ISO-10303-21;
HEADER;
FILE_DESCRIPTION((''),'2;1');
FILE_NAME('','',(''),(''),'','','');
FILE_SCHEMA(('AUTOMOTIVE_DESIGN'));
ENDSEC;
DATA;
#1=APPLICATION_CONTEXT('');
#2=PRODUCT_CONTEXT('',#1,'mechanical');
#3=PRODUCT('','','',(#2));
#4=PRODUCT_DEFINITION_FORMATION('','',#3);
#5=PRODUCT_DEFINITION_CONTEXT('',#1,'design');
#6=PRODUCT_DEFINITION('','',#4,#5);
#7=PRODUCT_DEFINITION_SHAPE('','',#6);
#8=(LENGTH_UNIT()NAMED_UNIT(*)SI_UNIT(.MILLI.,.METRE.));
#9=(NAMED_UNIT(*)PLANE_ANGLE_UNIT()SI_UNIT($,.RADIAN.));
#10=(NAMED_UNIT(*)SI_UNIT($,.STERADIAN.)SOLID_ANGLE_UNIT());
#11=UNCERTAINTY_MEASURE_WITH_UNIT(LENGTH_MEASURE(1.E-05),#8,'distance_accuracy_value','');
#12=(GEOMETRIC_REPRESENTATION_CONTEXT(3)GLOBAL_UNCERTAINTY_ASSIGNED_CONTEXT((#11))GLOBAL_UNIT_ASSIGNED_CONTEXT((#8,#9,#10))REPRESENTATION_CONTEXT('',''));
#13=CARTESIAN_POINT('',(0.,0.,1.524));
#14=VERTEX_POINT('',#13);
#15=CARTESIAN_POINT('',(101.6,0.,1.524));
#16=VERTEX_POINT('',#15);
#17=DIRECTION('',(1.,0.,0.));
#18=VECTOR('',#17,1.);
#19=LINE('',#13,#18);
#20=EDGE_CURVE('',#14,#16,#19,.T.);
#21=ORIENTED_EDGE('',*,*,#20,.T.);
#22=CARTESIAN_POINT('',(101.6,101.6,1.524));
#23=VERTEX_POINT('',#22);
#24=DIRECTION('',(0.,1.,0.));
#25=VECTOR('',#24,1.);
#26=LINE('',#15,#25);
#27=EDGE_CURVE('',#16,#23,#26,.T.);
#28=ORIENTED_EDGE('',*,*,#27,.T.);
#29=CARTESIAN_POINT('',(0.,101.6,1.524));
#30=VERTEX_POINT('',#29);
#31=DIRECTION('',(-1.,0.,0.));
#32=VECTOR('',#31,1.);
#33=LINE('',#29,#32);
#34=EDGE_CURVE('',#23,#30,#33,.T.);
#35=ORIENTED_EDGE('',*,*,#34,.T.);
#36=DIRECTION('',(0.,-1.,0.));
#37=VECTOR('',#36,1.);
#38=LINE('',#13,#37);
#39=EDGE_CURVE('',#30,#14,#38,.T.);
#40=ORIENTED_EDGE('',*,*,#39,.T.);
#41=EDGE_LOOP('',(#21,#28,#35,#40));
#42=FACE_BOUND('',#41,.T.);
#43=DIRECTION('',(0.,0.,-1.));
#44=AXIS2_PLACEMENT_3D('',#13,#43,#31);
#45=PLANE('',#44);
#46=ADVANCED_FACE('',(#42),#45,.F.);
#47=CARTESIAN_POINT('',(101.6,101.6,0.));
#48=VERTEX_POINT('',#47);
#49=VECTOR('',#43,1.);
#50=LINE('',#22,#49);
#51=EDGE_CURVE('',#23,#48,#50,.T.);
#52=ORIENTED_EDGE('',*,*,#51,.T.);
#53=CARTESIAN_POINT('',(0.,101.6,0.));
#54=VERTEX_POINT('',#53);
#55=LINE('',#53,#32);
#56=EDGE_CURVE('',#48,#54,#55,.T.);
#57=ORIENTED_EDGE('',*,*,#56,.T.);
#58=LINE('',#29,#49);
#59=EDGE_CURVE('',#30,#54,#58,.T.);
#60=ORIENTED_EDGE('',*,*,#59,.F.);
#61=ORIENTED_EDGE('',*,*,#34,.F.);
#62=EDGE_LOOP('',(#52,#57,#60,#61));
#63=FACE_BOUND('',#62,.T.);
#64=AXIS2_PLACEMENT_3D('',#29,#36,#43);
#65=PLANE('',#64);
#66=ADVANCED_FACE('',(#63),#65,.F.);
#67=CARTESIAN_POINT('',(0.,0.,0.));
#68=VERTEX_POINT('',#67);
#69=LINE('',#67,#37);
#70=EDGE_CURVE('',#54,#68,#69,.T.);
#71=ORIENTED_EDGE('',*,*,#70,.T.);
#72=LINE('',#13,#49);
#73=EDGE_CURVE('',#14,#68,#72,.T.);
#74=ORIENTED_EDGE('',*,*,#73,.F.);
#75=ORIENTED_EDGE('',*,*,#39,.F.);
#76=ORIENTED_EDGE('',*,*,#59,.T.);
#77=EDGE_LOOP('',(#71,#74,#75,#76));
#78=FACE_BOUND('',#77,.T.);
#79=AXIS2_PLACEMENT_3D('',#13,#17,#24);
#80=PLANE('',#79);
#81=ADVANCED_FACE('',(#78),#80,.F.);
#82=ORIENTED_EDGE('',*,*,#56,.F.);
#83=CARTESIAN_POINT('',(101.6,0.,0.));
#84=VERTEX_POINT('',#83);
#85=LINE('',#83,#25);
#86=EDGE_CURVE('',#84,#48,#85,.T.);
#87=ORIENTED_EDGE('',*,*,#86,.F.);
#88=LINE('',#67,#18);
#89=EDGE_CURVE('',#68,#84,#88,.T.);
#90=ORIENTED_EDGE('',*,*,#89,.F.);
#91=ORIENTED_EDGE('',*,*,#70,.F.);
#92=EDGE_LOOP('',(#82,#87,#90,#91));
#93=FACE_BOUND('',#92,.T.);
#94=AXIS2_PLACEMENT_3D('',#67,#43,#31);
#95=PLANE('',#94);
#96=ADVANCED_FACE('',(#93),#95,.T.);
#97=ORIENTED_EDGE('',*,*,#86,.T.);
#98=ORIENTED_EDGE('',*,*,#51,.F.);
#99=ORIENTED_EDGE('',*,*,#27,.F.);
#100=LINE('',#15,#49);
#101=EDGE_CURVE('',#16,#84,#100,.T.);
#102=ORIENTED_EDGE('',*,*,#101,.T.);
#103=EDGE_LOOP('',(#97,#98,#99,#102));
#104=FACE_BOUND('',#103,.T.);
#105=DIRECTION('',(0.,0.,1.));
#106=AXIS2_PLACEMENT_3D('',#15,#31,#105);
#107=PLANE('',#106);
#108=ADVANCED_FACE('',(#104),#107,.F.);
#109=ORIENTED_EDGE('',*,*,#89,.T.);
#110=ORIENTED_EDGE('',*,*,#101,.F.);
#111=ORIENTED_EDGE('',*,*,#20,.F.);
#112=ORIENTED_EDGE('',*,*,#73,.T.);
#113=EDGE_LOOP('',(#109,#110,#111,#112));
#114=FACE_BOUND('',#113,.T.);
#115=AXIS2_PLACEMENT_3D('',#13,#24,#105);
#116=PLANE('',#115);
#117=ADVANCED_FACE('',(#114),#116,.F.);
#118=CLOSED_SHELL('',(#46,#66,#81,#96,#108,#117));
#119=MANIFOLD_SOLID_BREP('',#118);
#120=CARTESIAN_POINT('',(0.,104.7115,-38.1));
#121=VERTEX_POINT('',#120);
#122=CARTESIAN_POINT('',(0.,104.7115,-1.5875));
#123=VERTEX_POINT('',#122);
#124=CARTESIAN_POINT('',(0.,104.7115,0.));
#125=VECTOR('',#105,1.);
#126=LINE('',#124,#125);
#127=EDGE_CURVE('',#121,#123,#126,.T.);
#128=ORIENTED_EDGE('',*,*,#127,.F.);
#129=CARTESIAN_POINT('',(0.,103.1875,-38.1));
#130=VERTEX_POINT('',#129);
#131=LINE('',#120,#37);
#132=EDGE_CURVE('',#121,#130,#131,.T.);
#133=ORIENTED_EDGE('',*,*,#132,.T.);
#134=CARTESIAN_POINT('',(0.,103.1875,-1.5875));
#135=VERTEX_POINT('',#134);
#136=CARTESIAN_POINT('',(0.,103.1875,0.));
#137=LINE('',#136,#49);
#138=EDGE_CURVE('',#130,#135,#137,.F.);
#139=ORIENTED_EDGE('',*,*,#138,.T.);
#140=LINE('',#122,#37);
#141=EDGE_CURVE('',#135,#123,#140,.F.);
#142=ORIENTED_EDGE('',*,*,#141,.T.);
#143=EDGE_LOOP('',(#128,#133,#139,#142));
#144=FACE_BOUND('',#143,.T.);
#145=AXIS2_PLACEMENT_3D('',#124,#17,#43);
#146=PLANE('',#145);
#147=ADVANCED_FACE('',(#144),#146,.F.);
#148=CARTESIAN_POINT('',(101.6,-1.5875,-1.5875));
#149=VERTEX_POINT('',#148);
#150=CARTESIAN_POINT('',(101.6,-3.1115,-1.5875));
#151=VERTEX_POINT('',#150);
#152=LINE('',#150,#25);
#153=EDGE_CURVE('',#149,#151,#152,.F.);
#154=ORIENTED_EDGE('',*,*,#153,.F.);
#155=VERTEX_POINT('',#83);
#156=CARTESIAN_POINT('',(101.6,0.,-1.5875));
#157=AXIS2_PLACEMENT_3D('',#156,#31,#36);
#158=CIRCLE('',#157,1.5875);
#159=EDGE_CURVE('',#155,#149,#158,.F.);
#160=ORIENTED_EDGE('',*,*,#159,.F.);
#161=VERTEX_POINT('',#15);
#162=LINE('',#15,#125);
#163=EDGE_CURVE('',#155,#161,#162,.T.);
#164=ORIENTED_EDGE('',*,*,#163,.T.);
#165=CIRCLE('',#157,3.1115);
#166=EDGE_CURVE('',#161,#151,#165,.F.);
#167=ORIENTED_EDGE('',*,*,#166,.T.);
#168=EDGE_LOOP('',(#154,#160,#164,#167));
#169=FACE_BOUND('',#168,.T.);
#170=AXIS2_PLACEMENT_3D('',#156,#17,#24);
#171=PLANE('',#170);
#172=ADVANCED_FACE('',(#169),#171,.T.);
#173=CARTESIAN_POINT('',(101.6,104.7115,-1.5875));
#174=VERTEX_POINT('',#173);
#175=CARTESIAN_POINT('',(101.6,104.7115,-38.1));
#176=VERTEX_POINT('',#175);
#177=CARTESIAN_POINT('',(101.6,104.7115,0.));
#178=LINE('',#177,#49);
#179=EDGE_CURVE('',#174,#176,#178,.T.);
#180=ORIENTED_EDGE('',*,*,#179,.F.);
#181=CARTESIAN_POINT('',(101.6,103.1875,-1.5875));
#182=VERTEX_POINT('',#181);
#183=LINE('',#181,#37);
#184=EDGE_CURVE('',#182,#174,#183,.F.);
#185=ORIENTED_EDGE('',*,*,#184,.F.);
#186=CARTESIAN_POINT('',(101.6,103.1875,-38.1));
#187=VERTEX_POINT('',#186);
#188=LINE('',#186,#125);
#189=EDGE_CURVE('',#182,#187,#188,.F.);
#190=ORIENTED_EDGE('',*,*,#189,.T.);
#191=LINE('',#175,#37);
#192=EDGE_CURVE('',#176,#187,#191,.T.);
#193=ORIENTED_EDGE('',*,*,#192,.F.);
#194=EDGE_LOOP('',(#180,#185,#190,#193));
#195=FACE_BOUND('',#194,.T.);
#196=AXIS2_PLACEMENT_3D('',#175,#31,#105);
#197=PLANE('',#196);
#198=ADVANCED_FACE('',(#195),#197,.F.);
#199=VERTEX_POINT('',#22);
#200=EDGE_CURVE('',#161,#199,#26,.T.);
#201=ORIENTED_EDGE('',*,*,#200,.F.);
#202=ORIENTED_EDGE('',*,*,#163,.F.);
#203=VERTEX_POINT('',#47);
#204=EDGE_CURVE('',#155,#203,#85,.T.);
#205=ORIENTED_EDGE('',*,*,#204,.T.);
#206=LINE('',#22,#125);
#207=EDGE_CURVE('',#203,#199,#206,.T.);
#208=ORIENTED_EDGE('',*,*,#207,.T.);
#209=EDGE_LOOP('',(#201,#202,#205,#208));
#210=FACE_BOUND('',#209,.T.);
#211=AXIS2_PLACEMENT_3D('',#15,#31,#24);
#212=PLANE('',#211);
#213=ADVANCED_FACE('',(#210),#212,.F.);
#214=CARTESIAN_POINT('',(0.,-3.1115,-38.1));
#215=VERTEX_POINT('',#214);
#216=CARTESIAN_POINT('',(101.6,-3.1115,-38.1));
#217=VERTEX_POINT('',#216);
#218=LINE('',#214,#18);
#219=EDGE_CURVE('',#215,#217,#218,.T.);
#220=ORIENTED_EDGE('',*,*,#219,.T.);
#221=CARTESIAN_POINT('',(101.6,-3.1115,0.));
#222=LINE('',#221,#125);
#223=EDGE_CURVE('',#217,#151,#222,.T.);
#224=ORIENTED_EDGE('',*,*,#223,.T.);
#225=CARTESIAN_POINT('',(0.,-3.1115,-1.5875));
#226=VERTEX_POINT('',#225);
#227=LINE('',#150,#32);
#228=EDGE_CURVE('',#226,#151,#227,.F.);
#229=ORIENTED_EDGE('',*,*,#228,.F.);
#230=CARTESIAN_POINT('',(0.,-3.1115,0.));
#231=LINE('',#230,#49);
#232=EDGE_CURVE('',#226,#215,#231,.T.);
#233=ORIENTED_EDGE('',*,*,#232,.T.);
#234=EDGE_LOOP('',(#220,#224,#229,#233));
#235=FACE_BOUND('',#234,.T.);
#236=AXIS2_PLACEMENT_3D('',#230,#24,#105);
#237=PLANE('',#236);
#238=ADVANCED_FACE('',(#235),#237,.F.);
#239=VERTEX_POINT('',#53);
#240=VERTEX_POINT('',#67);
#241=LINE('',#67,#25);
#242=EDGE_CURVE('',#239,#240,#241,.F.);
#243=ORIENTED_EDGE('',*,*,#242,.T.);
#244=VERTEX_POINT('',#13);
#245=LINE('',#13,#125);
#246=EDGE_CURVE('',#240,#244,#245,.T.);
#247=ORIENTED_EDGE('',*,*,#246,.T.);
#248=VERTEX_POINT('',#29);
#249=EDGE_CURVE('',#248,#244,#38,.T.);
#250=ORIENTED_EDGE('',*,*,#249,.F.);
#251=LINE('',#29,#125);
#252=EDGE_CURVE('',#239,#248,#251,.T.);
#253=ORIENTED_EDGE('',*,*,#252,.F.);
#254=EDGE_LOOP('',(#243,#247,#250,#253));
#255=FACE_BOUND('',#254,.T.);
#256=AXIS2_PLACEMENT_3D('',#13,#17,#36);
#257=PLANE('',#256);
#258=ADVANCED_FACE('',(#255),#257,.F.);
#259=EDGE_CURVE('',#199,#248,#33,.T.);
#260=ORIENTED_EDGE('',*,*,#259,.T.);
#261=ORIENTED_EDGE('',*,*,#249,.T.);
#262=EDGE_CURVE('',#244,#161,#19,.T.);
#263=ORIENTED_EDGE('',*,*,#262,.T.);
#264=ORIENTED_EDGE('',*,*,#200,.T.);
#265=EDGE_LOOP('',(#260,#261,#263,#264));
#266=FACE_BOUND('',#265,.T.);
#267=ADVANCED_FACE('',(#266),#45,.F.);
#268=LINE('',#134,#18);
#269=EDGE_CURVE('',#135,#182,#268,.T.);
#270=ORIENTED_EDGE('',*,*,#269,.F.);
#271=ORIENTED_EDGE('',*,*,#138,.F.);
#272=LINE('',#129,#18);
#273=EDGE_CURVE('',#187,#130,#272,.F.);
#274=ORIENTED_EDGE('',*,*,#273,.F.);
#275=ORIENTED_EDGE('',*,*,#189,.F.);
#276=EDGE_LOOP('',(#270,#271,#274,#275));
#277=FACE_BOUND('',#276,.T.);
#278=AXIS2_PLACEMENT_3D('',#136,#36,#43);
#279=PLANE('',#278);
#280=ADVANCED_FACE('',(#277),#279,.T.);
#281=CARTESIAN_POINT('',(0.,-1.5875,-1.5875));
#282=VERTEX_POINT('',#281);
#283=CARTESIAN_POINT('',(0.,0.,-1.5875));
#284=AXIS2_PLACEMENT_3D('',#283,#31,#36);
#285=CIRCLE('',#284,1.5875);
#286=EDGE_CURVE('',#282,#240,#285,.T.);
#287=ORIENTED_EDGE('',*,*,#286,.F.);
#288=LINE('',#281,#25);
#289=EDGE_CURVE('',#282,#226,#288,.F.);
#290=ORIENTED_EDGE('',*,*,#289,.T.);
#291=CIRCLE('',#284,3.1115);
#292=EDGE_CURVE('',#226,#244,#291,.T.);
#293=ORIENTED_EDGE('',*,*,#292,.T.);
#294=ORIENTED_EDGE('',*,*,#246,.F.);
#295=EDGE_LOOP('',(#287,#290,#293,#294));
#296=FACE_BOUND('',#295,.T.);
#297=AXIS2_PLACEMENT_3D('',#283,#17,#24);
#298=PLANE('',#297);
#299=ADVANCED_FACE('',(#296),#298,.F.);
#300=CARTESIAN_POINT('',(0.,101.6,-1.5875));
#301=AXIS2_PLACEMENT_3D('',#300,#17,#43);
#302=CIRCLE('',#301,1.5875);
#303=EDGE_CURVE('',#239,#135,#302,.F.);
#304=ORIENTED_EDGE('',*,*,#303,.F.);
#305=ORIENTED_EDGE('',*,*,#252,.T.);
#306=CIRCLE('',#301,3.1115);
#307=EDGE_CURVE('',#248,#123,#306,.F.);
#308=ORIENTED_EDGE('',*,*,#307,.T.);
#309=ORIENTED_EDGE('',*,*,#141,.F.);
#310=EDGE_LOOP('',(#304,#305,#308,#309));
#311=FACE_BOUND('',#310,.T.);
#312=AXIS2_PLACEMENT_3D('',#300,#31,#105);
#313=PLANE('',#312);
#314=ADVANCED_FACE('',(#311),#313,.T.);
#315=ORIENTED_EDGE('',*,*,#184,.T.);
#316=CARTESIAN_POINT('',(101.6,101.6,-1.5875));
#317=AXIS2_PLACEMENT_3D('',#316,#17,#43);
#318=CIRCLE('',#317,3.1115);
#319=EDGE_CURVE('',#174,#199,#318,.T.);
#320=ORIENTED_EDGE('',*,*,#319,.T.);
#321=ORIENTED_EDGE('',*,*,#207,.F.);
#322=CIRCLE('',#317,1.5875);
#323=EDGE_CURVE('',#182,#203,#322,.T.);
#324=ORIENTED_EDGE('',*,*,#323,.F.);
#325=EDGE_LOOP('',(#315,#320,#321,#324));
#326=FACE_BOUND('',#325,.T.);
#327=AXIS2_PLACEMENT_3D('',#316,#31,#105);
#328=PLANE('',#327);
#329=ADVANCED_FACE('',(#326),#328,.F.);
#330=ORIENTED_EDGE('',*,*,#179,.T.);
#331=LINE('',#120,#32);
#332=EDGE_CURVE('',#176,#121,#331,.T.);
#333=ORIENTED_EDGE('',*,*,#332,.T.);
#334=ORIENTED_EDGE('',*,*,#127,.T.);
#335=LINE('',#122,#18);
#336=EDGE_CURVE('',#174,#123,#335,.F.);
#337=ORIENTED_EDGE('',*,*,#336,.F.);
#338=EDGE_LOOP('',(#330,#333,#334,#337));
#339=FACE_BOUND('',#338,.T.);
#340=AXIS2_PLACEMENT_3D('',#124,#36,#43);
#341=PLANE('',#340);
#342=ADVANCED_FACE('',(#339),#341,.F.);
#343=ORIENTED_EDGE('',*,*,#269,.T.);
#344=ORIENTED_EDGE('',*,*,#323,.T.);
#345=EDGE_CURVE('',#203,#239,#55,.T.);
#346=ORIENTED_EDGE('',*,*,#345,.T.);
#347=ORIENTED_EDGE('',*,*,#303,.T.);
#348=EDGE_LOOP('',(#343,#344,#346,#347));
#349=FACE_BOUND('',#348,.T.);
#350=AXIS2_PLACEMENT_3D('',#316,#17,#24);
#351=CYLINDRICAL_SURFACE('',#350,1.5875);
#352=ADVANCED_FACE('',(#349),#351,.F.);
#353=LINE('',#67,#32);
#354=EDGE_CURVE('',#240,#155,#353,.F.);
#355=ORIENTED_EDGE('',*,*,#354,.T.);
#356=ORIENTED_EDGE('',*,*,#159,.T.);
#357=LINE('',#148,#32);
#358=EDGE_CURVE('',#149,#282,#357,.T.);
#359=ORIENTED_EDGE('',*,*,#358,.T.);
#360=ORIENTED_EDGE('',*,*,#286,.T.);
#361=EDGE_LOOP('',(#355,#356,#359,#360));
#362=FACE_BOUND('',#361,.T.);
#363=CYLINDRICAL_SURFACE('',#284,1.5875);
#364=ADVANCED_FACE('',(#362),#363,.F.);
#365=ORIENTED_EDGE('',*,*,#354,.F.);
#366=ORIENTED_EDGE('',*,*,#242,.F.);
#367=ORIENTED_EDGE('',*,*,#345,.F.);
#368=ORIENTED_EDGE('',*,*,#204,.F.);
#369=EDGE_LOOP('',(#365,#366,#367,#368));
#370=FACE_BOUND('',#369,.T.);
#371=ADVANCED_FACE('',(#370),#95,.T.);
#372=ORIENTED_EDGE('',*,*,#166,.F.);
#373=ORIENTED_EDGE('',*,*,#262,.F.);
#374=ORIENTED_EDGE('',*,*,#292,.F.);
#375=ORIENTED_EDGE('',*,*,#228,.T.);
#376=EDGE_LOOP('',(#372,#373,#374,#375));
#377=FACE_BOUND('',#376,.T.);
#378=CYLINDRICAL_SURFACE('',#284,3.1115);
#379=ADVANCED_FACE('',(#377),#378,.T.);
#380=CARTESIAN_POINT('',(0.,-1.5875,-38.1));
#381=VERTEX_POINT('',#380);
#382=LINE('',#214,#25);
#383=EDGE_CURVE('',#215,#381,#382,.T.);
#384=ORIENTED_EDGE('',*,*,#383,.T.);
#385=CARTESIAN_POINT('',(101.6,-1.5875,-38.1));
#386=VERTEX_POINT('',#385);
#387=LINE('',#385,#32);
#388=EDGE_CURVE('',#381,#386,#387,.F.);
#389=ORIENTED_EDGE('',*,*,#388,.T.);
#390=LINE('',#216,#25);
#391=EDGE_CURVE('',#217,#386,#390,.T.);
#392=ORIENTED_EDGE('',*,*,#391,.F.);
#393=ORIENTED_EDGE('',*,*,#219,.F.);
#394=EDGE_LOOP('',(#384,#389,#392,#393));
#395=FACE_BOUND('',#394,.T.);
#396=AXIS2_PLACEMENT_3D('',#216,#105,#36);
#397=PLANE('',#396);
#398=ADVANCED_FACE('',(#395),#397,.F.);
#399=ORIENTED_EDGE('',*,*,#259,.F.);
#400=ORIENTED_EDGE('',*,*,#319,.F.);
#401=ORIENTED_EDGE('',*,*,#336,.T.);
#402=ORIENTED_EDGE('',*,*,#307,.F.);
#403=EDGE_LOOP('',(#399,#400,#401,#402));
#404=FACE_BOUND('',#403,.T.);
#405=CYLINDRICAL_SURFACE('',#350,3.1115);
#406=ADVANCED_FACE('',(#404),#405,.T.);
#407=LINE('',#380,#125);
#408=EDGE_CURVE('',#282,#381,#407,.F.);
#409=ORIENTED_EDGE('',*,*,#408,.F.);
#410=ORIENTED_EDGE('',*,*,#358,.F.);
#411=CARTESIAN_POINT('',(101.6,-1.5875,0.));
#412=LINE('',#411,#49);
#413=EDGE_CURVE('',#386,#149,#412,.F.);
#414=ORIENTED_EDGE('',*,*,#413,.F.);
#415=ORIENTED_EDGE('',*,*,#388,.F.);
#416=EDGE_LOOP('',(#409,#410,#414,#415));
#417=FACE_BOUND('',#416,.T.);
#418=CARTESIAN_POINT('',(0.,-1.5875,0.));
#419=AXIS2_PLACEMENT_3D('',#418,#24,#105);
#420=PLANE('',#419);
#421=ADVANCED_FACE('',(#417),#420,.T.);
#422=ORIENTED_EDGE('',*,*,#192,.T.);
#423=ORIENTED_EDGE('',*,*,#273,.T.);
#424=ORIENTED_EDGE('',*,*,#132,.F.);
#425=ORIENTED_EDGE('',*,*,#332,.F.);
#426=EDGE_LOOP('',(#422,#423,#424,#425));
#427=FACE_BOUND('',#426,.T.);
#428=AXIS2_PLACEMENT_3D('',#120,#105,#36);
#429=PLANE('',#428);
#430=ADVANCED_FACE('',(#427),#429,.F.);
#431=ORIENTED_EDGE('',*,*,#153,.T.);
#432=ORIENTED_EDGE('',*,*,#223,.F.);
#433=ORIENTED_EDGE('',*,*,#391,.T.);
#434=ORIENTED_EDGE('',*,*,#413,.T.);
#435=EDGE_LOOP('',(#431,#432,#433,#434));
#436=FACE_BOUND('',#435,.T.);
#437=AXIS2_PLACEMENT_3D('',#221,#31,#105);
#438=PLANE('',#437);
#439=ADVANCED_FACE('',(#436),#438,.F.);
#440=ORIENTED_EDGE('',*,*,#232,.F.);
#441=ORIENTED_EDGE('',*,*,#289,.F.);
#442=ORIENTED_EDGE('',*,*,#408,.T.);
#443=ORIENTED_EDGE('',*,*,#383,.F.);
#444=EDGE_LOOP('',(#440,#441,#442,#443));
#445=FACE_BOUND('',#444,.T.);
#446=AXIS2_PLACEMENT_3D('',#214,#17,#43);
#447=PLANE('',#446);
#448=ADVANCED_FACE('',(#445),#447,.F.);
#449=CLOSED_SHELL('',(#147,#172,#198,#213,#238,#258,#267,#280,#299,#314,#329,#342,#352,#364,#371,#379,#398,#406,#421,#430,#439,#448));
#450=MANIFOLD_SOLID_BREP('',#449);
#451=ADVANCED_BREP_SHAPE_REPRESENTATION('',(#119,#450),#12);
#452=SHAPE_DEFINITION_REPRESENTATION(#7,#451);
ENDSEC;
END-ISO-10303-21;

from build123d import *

# Parameters (mm, degrees)
ESQUISSE1_W                 = 101.6
ESQUISSE1_H                 = 101.6
BOSS_EXTRU_1_DEPTH          = 1.524
CONVERTIR_VOLUME3_OUTLINE_W = 101.6
CONVERTIR_VOLUME3_OUTLINE_H = 1.524
CONVERTIR_VOLUME3_DEPTH     = 101.6
T_LE_PLI_E_SUR_AR_TE3_DEPTH = 101.6
T_LE_PLI_E_SUR_AR_TE5_DEPTH = 101.6


# Read off the part's stored shape, not the designer's step: Convertir-Volume3
# Sheet-metal steps are written as plain solids
with BuildPart() as part:
    # Esquisse1 → Boss.-Extru.1 (new body)
    with BuildSketch(Plane.XY):
        with Locations((50.8, 50.8)):
            Rectangle(ESQUISSE1_W, ESQUISSE1_H)
    extrude(amount=BOSS_EXTRU_1_DEPTH)


with BuildPart() as body_2:
    # Convertir-Volume3 outline → Convertir-Volume3 (new body)
    with BuildSketch(Plane.YZ):
        with Locations((50.8, 0.762)):
            Rectangle(CONVERTIR_VOLUME3_OUTLINE_W, CONVERTIR_VOLUME3_OUTLINE_H)
    extrude(amount=CONVERTIR_VOLUME3_DEPTH)

    # Tôle pliée sur arête3 section (across the edge) → Tôle pliée sur arête3 (add)
    with BuildSketch(Plane(origin=(101.6, -1.5875, 0), x_dir=(0, 1, 0), z_dir=(-1, 0, 0))):
        with BuildLine():
            Line((-1.524, 1.5875), (-1.524, 38.1))
            Line((-1.524, 38.1), (0, 38.1))
            Line((0, 38.1), (0, 1.5875))
            ThreePointArc((0, 1.5875), (0.464967985, 0.464967985), (1.5875, 0))
            Line((1.5875, 0), (1.5875, -1.524))
            ThreePointArc((1.5875, -1.524), (-0.61266275, -0.61266275), (-1.524, 1.5875))
        make_face()
    extrude(amount=T_LE_PLI_E_SUR_AR_TE3_DEPTH)

    # Tôle pliée sur arête5 section (across the edge) → Tôle pliée sur arête5 (add)
    with BuildSketch(Plane(origin=(0, 103.1875, 0), x_dir=(0, -1, 0), z_dir=(1, 0, 0))):
        with BuildLine():
            Line((-1.524, 1.5875), (-1.524, 38.1))
            Line((-1.524, 38.1), (0, 38.1))
            Line((0, 38.1), (0, 1.5875))
            ThreePointArc((0, 1.5875), (0.464967985, 0.464967985), (1.5875, 0))
            Line((1.5875, 0), (1.5875, -1.524))
            ThreePointArc((1.5875, -1.524), (-0.61266275, -0.61266275), (-1.524, 1.5875))
        make_face()
    extrude(amount=T_LE_PLI_E_SUR_AR_TE5_DEPTH)


solid = Compound([part.part, body_2.part])
